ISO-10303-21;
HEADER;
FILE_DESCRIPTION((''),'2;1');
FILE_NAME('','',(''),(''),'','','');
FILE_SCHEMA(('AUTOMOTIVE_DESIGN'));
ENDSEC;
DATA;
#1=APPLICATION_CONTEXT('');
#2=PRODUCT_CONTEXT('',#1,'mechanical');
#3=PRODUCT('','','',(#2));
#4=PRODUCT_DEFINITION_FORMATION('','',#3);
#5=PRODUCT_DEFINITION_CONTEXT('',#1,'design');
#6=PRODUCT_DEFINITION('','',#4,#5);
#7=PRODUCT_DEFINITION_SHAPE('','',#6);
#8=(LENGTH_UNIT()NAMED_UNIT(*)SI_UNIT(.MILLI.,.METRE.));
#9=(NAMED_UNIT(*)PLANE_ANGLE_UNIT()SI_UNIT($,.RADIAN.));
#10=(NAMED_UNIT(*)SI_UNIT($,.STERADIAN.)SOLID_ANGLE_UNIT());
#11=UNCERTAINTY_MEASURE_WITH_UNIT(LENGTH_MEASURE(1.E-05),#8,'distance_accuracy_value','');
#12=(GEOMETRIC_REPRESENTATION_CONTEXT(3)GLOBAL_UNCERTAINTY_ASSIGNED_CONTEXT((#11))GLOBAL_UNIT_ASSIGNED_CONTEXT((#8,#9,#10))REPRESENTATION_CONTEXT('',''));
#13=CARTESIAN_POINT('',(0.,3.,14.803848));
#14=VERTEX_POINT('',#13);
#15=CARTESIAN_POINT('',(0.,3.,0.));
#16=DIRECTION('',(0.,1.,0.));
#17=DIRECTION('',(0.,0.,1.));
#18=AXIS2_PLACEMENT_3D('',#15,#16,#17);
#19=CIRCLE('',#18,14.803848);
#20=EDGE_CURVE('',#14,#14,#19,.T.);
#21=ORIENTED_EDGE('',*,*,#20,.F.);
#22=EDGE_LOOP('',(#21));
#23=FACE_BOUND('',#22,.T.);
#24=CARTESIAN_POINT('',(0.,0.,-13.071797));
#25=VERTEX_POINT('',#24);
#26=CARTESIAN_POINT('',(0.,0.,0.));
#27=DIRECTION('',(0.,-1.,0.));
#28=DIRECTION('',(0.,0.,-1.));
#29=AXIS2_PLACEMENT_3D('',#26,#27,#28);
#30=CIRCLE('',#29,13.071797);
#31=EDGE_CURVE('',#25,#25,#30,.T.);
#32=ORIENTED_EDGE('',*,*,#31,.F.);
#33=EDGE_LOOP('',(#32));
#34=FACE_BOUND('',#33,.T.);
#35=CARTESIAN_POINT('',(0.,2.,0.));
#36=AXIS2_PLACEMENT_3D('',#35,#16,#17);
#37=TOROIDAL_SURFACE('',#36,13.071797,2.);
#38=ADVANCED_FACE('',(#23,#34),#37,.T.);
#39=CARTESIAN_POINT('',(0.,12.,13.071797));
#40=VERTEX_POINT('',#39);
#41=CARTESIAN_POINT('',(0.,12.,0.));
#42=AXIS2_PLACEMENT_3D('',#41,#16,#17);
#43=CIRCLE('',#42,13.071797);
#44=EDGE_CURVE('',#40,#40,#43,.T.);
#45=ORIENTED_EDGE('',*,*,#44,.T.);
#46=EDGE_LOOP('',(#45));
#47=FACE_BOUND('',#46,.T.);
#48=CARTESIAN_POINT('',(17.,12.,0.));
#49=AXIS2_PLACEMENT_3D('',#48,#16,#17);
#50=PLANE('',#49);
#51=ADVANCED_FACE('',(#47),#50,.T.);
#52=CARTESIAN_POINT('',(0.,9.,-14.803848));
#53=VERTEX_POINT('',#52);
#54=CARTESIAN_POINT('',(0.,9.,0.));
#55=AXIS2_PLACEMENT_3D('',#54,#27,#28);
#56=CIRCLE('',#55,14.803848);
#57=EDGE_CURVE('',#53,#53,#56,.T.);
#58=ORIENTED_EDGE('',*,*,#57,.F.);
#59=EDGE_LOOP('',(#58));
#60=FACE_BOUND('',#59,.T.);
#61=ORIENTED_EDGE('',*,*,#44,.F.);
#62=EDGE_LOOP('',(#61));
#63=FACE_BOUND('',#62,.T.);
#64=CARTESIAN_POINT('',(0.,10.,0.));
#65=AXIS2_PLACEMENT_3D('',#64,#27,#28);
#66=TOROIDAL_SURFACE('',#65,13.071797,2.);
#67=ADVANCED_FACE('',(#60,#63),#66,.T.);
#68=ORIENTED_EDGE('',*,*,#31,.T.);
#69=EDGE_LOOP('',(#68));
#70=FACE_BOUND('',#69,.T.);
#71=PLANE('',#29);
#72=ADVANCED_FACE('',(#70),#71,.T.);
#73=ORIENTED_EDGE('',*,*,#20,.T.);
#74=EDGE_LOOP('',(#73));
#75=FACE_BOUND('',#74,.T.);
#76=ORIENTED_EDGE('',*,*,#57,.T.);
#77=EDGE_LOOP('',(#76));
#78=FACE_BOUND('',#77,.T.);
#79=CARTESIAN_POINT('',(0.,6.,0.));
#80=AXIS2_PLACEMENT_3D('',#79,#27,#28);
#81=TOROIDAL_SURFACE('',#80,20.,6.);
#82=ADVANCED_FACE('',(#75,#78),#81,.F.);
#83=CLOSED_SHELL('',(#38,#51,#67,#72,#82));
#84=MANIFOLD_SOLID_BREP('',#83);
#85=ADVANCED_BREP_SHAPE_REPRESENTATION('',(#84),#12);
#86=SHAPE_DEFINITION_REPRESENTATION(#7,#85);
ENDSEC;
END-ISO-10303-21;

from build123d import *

# Parameters (mm, degrees)
FILLET4_R = 2
FILLET5_R = 2
FILLET6_R = 2
FILLET7_R = 2


# Some blends are built 0.0001 mm under size
with BuildPart() as part:
    # Sketch2 → Revolve1 (revolve)
    with BuildSketch(Plane.XY, mode=Mode.PRIVATE) as revolve1_sk:
        with BuildLine():
            Line((0, 0), (0, 12))
            Line((0, 12), (17, 12))
            Line((17, 12), (17, 11.196152423))
            ThreePointArc((17, 11.196152423), (14, 6), (17, 0.803847577))
            Line((17, 0.803847577), (17, 0))
            Line((17, 0), (0, 0))
        make_face()
    revolve(revolve1_sk.sketch.rotate(Axis((0, 0, 0), (0, 1, 0)), 90), axis=Axis((0, 0, 0), (0, 1, 0)))

    # Fillet4
    # the kernel refuses this fillet: 2 mm, written as the material it takes off along each edge
    with BuildSketch(Plane(origin=(0, 12, 0), x_dir=(0, 0, -1), z_dir=(1, 0, 0))) as fillet4_piece_1:
        with BuildLine():
            CenterArc((15.397121532, -2), FILLET4_R, 36.732240325, 53.267759675)
            Line((17, -0.803847577), (17.032057569, -0.779924529))
            ThreePointArc((17.032057569, -0.779924529), (17.04, -0.401923789), (17.04, 0))
            Line((17.04, 0), (17, 0.04))
            Line((17, 0.04), (15.397121532, 0.04))
            Line((15.397121532, 0.04), (15.397121532, 0))
        make_face()
    revolve(axis=Axis((0, 12, 0), (0, 1, 0)), mode=Mode.SUBTRACT)

    # Fillet5
    fillet5_edges = [part.edges().sort_by_distance(p)[0] for p in [
        (0, 11.196152423, 17),
    ]]
    fillet(fillet5_edges, radius=FILLET5_R - 0.0001)  # a hair under: the kernel refuses the full size

    # Fillet6
    # the kernel refuses this fillet: 2 mm, written as the material it takes off along each edge
    with BuildSketch(Plane(origin=(0, 0, 0), x_dir=(0, 0, -1), z_dir=(1, 0, 0))) as fillet6_piece_1:
        with BuildLine():
            CenterArc((15.397121532, 2), FILLET6_R, 270, 53.267759675)
            Line((15.397121532, 0), (15.397121532, -0.04))
            Line((15.397121532, -0.04), (17, -0.04))
            Line((17, -0.04), (17.04, 0))
            ThreePointArc((17.04, 0), (17.04, 0.401923789), (17.032057569, 0.779924529))
            Line((17.032057569, 0.779924529), (17, 0.803847577))
        make_face()
    revolve(axis=Axis((0, 0, 0), (0, 1, 0)), mode=Mode.SUBTRACT)

    # Fillet7
    fillet7_edges = [part.edges().sort_by_distance(p)[0] for p in [
        (0, 0.803847577, 17),
    ]]
    fillet(fillet7_edges, radius=FILLET7_R)


solid = part.part
